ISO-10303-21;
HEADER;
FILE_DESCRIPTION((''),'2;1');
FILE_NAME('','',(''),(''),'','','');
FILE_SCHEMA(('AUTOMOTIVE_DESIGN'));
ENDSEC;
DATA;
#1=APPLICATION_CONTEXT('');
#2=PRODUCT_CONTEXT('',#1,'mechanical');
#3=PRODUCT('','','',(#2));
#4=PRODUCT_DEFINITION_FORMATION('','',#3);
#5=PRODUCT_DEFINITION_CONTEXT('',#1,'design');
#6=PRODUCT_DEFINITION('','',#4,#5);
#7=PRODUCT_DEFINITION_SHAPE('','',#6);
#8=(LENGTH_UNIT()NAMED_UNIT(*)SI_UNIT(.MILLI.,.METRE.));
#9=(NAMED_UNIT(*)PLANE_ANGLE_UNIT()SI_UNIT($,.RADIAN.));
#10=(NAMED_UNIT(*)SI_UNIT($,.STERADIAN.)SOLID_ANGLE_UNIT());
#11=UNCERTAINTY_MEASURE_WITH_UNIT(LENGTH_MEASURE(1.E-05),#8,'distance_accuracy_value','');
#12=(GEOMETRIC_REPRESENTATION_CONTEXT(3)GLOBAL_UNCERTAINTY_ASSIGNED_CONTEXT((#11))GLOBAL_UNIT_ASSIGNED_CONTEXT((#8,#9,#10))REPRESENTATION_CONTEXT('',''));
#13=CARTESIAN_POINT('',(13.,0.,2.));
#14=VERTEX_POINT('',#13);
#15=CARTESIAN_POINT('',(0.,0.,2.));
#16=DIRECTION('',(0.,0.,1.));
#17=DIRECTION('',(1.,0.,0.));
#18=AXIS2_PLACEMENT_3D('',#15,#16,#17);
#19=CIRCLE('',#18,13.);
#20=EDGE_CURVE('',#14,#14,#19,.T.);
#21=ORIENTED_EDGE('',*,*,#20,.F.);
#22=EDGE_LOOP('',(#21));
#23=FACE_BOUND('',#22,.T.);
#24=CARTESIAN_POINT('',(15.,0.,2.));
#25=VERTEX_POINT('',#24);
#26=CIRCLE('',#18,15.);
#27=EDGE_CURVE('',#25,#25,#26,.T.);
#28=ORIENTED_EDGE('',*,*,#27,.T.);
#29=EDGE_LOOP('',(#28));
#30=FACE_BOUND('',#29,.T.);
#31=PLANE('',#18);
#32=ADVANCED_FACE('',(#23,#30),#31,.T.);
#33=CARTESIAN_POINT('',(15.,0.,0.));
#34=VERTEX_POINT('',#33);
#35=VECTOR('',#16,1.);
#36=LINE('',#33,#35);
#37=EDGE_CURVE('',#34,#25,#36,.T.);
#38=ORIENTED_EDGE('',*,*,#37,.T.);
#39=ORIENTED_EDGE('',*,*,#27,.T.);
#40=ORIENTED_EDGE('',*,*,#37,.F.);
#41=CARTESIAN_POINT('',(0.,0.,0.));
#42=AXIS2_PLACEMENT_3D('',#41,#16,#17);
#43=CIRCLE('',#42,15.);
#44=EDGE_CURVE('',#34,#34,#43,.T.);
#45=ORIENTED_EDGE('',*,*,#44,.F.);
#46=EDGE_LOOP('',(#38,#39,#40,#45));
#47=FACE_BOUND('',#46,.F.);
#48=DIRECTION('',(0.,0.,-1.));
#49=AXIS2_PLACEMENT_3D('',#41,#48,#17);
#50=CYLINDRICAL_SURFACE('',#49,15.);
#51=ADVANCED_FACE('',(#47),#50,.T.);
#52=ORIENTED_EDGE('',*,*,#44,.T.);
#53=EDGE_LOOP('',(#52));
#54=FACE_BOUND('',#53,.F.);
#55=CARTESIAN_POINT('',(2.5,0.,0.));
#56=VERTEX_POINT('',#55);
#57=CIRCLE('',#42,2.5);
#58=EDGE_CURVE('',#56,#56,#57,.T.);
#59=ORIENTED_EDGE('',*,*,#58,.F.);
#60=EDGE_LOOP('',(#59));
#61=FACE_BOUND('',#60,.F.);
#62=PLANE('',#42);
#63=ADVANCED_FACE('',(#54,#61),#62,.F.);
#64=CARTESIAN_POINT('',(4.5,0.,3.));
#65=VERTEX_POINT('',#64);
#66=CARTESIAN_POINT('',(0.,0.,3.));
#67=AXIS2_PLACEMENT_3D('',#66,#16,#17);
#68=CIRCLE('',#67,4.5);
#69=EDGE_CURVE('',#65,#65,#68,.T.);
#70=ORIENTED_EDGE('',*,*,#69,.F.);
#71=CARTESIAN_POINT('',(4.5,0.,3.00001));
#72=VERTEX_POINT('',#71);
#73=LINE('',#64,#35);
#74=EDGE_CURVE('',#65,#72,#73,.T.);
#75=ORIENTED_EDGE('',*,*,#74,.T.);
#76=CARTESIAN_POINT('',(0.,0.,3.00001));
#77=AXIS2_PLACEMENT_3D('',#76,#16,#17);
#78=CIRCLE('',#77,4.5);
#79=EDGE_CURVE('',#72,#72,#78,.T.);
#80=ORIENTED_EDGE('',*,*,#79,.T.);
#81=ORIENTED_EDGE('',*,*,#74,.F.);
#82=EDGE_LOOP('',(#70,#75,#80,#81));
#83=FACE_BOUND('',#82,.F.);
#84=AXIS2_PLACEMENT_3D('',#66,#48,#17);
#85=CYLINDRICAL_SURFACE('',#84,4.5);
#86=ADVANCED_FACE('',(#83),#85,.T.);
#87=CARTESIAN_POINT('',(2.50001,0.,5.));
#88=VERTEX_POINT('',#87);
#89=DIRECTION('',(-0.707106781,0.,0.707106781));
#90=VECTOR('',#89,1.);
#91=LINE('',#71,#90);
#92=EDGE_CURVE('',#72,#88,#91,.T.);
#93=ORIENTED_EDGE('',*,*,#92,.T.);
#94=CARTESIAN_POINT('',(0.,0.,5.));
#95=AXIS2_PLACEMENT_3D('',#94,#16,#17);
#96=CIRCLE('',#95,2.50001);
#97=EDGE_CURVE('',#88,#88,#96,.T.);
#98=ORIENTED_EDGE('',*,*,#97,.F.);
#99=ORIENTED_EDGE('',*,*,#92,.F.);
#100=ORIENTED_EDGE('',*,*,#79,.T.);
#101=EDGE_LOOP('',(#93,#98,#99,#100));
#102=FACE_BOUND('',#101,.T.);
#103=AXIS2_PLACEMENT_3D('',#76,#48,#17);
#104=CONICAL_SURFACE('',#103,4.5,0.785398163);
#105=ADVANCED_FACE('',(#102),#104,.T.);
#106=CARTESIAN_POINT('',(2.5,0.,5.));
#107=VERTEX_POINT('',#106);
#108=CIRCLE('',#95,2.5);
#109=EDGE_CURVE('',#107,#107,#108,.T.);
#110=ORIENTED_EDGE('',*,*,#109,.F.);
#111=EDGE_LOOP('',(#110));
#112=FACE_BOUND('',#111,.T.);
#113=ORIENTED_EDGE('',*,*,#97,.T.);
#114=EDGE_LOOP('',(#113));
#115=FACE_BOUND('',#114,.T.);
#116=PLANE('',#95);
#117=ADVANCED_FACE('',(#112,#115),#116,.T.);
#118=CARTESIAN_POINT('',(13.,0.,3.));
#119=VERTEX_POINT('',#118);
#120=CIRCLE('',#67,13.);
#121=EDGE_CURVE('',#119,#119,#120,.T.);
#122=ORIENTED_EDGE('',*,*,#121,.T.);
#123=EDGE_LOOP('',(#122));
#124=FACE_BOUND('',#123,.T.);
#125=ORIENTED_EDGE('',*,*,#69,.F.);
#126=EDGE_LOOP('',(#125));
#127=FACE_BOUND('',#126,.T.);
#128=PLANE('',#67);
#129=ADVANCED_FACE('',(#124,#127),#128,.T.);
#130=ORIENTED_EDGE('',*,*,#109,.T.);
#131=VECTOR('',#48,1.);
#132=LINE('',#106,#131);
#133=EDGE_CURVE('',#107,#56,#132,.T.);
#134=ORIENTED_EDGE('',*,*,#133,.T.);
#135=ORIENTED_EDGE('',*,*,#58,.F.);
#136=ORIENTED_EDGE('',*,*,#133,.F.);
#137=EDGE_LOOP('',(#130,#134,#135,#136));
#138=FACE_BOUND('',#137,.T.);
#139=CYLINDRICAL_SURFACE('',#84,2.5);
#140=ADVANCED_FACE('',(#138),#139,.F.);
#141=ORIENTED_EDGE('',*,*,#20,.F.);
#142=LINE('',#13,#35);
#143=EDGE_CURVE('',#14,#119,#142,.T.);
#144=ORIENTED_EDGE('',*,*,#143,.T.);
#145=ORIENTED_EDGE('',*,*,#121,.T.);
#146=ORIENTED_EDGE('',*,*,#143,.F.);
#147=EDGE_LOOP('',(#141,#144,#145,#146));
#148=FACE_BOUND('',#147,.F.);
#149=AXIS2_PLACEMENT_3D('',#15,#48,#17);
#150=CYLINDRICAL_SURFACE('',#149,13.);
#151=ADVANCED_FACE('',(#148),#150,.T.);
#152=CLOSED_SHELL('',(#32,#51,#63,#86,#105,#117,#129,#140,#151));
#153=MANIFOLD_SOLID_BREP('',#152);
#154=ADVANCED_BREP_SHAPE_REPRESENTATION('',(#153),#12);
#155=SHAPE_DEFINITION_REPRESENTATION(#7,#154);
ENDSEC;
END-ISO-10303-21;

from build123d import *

# Parameters (mm, degrees)
F0_R     = 15
F0_R_2   = 2.5
F1_DEPTH = 2
F2_R     = 13
F2_R_2   = 2.5
F3_DEPTH = 1
F4_R     = 4.5
F4_R_2   = 2.5
F5_DEPTH = 2
F6_SIZE2 = 1.99999
F6_SIZE  = 1.99999


# Not quite as in the source:
# - a fillet or chamfer is up to 0.001 mm smaller than in the source, because OpenCascade refuses the exact size


with BuildPart() as f1:
    # F0 (on Top) → F1 (new body)
    with BuildSketch(Plane.XY):
        Circle(F0_R)
        Circle(F0_R_2, mode=Mode.SUBTRACT)
    extrude(amount=F1_DEPTH)

    # F2 (on face) → F3 (join)
    with BuildSketch(Plane.XY.offset(2)):
        Circle(F2_R)
        Circle(F2_R_2, mode=Mode.SUBTRACT)
    extrude(amount=F3_DEPTH)

    # F4 (on face) → F5 (join)
    with BuildSketch(Plane.XY.offset(3)):
        Circle(F4_R)
        Circle(F4_R_2, mode=Mode.SUBTRACT)
    extrude(amount=F5_DEPTH)

    # F6 (size 2 and 2 in the source; OpenCascade refuses exactly that, so slightly less here)
    f6_edges = [f1.edges().sort_by_distance(p)[0] for p in [
        (-4.5, 0, 5),
    ]]
    chamfer(f6_edges, length=F6_SIZE, length2=F6_SIZE2)


solid = f1.part
